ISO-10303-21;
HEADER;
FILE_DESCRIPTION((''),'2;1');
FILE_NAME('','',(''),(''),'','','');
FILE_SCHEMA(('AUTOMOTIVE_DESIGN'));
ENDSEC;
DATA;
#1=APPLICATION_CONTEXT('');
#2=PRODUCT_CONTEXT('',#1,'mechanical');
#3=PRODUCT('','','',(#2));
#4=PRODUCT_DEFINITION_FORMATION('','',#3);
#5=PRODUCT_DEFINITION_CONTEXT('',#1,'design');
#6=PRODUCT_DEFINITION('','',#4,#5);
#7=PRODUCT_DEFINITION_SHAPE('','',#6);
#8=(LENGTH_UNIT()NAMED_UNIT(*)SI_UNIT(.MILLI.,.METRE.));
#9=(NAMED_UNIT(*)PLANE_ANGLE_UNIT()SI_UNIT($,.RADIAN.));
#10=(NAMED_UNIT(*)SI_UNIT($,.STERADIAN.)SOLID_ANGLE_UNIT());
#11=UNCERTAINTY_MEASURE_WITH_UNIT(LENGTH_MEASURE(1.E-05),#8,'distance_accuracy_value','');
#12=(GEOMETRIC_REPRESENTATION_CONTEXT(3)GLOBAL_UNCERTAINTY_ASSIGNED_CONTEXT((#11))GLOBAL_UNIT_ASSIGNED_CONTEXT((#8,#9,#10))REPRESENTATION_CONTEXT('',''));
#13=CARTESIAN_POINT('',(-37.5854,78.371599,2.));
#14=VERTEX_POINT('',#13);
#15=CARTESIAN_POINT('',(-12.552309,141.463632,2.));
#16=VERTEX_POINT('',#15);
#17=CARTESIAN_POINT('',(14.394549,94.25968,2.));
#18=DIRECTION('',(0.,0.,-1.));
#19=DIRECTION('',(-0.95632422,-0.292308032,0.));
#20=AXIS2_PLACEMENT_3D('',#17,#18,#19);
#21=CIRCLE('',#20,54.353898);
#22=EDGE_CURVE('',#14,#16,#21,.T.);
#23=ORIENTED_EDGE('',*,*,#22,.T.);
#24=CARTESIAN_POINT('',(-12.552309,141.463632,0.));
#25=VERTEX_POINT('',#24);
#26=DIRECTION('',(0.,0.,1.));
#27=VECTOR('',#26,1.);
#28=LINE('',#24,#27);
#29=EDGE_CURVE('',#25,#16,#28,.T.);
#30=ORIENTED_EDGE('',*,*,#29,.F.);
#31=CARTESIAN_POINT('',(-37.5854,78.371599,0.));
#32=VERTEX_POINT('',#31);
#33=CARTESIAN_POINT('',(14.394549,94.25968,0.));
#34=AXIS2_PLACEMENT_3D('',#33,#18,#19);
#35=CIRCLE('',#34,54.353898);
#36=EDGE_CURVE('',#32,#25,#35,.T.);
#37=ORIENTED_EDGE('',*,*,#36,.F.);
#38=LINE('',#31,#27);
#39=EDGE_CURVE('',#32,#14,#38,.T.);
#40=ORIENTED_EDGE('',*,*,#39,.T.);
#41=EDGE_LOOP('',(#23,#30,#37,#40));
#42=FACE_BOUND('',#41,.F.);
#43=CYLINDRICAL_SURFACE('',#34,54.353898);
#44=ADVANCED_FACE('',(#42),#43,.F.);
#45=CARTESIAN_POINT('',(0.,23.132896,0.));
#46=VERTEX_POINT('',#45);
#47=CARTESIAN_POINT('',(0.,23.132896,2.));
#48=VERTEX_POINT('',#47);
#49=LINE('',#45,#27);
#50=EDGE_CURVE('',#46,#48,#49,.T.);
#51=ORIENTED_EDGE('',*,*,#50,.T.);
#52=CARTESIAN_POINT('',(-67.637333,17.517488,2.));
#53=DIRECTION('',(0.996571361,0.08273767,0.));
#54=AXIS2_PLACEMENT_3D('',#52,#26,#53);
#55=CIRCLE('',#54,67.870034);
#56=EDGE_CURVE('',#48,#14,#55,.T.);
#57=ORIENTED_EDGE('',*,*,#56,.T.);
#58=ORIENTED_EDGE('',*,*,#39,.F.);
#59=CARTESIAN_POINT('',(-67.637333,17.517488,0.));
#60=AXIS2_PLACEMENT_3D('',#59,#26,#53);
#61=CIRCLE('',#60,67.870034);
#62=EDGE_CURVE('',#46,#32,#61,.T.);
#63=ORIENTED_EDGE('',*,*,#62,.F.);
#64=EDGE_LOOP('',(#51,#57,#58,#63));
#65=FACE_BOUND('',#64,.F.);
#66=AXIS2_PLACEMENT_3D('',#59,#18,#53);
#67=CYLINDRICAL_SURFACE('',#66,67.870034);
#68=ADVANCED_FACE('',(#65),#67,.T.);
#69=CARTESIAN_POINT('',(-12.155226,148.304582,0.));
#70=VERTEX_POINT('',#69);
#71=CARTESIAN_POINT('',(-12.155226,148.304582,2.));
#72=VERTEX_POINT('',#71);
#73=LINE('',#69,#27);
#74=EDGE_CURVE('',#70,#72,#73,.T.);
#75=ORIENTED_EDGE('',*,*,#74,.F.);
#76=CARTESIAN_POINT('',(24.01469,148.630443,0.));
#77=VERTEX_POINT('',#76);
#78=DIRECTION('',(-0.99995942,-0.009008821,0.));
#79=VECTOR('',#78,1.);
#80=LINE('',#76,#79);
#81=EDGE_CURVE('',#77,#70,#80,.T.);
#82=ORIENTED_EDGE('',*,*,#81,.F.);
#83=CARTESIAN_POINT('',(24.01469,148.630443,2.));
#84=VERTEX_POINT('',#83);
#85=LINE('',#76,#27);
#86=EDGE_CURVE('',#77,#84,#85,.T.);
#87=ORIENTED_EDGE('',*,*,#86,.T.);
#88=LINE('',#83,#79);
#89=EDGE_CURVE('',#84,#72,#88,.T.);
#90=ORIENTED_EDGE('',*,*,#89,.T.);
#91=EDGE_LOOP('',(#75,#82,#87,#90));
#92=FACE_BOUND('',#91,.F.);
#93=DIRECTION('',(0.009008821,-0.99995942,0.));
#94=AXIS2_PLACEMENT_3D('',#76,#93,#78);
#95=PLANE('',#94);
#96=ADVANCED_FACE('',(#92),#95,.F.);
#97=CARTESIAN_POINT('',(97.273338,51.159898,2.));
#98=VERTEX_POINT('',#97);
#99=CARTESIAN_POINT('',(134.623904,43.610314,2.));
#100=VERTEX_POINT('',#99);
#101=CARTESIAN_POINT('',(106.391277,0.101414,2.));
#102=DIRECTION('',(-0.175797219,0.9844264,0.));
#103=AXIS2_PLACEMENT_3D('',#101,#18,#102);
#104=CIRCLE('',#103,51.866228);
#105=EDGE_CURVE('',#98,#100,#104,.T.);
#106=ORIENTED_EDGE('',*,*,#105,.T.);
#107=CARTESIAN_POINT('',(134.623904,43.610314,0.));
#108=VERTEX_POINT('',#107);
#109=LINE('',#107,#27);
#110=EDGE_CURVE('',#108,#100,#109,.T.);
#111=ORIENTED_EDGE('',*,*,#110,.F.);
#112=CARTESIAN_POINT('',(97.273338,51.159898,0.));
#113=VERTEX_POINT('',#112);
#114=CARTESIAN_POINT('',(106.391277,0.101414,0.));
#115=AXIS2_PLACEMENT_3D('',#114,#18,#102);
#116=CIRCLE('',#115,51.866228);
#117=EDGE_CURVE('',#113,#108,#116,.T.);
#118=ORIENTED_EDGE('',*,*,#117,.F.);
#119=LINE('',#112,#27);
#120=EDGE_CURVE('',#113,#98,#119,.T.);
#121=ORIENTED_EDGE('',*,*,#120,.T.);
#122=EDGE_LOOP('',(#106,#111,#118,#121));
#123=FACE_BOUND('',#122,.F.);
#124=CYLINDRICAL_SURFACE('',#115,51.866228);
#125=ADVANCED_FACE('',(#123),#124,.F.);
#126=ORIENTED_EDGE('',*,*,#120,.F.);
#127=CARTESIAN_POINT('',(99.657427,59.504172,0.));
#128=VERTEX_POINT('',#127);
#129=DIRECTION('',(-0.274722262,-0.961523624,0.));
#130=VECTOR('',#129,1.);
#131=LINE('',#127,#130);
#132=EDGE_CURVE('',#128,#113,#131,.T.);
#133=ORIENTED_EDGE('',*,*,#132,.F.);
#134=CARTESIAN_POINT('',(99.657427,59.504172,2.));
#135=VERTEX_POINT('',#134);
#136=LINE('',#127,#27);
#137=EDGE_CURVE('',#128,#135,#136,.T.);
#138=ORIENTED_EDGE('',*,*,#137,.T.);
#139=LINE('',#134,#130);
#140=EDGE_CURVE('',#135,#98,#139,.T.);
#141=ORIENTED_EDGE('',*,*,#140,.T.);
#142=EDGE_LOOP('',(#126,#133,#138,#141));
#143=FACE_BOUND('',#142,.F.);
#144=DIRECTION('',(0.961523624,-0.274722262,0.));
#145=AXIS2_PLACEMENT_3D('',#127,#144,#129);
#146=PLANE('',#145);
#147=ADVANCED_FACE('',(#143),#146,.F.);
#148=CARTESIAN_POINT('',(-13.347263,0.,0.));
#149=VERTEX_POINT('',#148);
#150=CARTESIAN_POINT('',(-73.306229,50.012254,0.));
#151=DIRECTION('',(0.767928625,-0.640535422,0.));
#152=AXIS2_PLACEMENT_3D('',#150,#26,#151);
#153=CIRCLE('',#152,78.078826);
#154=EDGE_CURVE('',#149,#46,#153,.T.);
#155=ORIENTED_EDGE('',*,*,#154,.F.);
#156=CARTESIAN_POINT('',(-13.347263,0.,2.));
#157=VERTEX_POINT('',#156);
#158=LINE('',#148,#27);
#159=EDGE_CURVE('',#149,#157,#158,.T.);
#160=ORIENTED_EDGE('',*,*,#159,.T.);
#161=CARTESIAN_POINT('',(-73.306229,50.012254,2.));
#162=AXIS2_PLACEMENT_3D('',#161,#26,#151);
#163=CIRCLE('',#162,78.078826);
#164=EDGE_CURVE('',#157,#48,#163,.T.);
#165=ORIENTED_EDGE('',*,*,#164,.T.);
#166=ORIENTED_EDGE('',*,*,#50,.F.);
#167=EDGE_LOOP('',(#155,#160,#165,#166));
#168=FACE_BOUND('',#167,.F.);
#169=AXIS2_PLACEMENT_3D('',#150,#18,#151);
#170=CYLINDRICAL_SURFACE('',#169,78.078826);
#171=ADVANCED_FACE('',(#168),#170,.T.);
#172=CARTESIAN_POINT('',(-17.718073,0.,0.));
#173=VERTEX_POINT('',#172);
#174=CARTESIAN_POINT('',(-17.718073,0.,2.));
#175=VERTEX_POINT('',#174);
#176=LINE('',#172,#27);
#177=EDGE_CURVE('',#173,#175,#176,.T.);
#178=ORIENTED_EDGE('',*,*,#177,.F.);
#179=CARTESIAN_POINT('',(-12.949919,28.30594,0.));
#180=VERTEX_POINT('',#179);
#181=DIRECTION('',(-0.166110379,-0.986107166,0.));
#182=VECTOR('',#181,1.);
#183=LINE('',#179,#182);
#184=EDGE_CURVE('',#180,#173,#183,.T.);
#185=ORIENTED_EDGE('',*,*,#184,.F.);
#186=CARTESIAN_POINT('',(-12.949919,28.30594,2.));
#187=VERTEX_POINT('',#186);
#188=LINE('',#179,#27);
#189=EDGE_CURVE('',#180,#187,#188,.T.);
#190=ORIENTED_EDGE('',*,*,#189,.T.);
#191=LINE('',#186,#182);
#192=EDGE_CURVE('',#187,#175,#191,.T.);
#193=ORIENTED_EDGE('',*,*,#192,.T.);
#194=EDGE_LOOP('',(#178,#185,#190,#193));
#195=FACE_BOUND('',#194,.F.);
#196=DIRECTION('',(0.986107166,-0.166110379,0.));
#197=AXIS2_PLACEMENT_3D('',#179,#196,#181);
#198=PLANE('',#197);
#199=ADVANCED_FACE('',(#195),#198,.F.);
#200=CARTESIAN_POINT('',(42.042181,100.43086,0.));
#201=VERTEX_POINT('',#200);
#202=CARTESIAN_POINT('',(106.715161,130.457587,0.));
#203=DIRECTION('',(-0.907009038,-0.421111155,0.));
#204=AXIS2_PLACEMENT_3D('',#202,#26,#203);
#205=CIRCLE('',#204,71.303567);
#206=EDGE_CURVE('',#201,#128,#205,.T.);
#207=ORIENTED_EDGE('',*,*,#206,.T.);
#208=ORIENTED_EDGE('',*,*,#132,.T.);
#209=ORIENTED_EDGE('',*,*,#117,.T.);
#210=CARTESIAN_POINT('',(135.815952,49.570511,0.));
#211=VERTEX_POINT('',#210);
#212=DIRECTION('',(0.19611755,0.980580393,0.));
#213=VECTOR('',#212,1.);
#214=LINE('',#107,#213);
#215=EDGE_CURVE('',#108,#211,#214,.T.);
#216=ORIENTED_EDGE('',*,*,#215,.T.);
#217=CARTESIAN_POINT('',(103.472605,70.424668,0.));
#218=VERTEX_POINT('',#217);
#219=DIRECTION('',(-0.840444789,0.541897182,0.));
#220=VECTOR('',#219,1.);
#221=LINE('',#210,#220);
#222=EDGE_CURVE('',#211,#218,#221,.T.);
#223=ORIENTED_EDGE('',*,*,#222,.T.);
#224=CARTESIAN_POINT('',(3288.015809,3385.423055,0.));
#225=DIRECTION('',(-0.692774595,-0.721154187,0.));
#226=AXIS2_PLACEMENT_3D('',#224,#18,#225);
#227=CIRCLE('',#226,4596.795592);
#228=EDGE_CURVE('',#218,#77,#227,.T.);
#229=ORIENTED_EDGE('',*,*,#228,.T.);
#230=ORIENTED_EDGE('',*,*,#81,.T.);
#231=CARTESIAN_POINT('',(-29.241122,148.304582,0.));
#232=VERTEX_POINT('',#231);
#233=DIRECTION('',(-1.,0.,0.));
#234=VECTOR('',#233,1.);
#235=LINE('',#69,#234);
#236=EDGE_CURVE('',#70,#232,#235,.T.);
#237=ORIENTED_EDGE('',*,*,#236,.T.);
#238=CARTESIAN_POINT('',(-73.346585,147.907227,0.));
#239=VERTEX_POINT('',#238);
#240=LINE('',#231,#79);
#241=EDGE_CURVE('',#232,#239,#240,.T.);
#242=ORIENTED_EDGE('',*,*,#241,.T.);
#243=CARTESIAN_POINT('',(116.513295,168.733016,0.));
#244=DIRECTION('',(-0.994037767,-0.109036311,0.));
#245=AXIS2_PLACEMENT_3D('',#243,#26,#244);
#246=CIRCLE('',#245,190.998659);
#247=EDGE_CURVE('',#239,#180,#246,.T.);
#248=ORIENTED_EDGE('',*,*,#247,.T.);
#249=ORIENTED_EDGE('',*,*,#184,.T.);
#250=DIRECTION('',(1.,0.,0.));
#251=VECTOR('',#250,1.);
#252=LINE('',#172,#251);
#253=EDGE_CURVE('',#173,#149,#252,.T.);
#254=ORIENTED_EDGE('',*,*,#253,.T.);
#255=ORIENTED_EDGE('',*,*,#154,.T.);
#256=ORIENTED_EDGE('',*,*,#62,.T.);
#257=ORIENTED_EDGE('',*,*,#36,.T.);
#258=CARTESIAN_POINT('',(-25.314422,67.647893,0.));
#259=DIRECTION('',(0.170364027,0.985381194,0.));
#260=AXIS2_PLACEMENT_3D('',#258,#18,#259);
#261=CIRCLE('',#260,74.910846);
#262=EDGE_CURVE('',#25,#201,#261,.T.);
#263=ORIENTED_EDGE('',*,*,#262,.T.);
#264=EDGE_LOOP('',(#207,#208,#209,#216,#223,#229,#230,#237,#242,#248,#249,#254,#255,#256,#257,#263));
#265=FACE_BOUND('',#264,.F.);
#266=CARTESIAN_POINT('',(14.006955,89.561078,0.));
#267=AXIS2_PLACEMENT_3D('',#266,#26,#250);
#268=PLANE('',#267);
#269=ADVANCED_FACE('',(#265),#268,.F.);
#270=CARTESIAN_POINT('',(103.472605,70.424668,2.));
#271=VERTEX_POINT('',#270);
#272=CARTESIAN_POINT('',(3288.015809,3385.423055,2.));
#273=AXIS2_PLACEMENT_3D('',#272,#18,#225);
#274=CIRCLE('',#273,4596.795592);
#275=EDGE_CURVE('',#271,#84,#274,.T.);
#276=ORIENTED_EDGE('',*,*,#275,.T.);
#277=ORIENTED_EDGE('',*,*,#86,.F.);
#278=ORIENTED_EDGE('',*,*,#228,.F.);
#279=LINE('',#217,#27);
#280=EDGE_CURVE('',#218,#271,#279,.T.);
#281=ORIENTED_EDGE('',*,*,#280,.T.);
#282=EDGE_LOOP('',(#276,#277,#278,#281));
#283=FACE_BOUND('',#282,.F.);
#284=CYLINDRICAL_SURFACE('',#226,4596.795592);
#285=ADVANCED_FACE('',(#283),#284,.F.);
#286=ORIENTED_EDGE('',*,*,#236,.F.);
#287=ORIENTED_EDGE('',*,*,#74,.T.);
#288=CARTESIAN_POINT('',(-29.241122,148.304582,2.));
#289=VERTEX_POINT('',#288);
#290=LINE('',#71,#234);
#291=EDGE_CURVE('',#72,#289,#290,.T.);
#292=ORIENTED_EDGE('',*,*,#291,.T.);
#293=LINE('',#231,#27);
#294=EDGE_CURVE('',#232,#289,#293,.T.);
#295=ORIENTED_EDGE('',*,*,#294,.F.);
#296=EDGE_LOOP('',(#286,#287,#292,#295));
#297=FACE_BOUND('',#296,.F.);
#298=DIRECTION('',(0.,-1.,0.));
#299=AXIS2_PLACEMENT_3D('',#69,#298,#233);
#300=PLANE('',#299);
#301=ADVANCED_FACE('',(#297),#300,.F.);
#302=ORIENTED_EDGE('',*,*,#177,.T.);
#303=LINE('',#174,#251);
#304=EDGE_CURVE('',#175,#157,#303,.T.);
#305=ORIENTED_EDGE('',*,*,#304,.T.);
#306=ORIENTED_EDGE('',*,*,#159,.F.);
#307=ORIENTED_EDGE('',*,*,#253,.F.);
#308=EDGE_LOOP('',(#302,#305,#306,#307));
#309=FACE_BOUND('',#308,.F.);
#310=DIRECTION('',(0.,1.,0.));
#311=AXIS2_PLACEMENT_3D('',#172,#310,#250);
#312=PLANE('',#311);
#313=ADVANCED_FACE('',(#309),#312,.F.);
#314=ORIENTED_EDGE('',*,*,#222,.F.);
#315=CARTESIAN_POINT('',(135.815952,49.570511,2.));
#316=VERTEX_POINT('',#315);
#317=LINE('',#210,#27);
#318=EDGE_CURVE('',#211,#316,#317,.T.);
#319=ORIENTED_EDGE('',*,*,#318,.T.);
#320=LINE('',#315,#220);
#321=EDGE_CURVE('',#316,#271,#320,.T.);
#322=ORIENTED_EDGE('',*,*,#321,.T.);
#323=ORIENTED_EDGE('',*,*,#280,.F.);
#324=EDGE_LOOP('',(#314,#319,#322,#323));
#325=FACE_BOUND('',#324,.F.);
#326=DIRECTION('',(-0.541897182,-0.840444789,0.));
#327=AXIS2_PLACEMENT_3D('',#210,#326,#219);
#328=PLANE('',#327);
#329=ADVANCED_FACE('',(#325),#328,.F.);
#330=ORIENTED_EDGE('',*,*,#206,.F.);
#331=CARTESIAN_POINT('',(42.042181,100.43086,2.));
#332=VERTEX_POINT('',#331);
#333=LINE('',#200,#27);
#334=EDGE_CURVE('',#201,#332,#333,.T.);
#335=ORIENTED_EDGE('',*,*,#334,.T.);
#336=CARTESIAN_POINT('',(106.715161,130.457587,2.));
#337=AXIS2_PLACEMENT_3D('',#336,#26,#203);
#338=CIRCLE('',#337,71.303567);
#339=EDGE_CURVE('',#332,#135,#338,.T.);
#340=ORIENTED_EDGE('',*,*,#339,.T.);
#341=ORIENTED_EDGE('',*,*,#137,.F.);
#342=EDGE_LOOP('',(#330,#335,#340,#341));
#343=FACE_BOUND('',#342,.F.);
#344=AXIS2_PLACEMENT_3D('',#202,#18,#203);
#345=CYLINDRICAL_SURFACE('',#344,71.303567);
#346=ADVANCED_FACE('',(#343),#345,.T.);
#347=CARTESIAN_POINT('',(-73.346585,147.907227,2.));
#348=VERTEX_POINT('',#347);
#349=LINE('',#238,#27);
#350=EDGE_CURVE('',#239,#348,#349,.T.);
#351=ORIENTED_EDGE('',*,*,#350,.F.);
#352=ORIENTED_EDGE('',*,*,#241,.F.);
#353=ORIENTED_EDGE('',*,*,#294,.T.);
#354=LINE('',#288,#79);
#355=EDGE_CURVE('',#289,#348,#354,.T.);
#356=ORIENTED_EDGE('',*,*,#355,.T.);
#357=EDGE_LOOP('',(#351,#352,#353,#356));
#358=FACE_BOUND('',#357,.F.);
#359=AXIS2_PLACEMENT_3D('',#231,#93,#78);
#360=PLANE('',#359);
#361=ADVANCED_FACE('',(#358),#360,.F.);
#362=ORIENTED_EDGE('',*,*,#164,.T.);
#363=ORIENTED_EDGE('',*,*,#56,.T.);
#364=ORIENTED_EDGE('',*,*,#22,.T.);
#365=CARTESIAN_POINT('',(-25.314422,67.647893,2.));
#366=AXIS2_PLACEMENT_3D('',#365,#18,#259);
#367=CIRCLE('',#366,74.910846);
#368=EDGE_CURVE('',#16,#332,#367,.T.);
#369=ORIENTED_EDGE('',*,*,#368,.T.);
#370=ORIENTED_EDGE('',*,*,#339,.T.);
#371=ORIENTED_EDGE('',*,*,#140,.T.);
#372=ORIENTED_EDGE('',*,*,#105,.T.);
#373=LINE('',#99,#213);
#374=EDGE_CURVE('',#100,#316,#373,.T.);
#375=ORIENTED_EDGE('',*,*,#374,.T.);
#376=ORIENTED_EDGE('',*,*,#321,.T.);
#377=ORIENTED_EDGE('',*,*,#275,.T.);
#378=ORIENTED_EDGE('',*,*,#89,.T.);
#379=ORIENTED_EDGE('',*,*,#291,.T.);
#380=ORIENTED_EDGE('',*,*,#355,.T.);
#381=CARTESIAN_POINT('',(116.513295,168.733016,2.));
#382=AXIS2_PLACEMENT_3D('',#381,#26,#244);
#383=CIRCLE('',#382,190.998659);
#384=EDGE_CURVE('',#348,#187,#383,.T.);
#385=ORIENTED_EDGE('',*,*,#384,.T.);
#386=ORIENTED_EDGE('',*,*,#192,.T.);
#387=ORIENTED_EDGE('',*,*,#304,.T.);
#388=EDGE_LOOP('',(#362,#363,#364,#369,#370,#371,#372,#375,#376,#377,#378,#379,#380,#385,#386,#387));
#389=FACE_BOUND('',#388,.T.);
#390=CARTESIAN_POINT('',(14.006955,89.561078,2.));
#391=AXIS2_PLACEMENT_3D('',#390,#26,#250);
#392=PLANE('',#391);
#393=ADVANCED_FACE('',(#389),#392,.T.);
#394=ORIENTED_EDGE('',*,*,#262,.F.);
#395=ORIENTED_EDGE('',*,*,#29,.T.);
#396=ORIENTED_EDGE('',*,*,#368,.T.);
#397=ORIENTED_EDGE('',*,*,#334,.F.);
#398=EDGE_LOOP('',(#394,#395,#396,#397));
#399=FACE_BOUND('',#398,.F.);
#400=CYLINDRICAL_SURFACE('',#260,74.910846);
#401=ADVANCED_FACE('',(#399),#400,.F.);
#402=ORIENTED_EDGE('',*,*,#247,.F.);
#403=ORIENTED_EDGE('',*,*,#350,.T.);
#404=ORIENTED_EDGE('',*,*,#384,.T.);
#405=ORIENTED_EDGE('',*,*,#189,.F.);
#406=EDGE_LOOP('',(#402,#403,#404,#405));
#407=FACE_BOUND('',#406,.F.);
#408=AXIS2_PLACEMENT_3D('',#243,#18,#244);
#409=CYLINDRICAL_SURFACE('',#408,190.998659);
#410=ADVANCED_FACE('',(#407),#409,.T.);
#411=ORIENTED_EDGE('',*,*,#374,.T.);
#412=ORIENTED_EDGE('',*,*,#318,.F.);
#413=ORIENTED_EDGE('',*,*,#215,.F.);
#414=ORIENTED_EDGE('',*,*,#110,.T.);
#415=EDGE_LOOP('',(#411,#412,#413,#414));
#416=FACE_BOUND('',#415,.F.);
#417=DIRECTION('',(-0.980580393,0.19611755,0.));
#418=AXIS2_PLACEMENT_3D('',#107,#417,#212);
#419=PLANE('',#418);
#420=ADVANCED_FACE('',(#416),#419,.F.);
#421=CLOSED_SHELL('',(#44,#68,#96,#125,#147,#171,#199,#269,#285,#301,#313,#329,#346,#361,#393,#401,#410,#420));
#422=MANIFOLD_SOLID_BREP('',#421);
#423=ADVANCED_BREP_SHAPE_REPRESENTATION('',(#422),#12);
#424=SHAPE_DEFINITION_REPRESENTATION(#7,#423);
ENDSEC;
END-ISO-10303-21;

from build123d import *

# Parameters (mm, degrees)
F1_DEPTH = 2


# Not quite as in the source:
# - a feature names something its author has since deleted; it is built from what else it names


with BuildPart() as f1:
    # F0 (on Top) → F1 (new body)
    with BuildSketch(Plane.XY):
        with BuildLine():
            Line((-17.7180729806, 0), (-13.3472634479, 0))
            ThreePointArc((-13.3472634479, 0), (-5.6771986993, 10.9915241569), (0, 23.1328960508))
            ThreePointArc((0, 23.1328960508), (-11.5247073045, 55.6975197064), (-37.5854000449, 78.3715993166))
            ThreePointArc((-37.5854000449, 78.3715993166), (-36.1278357664, 114.3054992712), (-12.5523087913, 141.4636322597))
            ThreePointArc((-12.5523087913, 141.4636322597), (19.6930692126, 127.5307837734), (42.0421807398, 100.4308597236))
            ThreePointArc((42.0421807398, 100.4308597236), (65.4226402571, 72.3273330377), (99.6574273635, 59.5041723042))
            Line((99.6574273635, 59.5041723042), (97.2733384301, 51.1598982899))
            ThreePointArc((97.2733384301, 51.1598982899), (116.6670679291, 50.9395271005), (134.6239036251, 43.610314378))
            Line((134.6239036251, 43.610314378), (135.8159518172, 49.5705106347))
            Line((135.8159518172, 49.5705106347), (103.4726053476, 70.4246684909))
            ThreePointArc((103.4726053476, 70.4246684909), (63.5065429383, 109.2866549818), (24.0146897469, 148.6304431832))
            Line((24.0146897469, 148.6304431832), (-12.1552264318, 148.3045816422))
            Line((-12.1552264318, 148.3045816422), (-29.2411223054, 148.3045816422))
            Line((-29.2411223054, 148.3045816422), (-73.3465850353, 147.9072272778))
            ThreePointArc((-73.3465850353, 147.9072272778), (-53.9798913788, 82.6367857077), (-12.9499193281, 28.30594033))
            Line((-12.9499193281, 28.30594033), (-17.7180729806, 0))
        make_face()
    extrude(amount=F1_DEPTH)


solid = f1.part
